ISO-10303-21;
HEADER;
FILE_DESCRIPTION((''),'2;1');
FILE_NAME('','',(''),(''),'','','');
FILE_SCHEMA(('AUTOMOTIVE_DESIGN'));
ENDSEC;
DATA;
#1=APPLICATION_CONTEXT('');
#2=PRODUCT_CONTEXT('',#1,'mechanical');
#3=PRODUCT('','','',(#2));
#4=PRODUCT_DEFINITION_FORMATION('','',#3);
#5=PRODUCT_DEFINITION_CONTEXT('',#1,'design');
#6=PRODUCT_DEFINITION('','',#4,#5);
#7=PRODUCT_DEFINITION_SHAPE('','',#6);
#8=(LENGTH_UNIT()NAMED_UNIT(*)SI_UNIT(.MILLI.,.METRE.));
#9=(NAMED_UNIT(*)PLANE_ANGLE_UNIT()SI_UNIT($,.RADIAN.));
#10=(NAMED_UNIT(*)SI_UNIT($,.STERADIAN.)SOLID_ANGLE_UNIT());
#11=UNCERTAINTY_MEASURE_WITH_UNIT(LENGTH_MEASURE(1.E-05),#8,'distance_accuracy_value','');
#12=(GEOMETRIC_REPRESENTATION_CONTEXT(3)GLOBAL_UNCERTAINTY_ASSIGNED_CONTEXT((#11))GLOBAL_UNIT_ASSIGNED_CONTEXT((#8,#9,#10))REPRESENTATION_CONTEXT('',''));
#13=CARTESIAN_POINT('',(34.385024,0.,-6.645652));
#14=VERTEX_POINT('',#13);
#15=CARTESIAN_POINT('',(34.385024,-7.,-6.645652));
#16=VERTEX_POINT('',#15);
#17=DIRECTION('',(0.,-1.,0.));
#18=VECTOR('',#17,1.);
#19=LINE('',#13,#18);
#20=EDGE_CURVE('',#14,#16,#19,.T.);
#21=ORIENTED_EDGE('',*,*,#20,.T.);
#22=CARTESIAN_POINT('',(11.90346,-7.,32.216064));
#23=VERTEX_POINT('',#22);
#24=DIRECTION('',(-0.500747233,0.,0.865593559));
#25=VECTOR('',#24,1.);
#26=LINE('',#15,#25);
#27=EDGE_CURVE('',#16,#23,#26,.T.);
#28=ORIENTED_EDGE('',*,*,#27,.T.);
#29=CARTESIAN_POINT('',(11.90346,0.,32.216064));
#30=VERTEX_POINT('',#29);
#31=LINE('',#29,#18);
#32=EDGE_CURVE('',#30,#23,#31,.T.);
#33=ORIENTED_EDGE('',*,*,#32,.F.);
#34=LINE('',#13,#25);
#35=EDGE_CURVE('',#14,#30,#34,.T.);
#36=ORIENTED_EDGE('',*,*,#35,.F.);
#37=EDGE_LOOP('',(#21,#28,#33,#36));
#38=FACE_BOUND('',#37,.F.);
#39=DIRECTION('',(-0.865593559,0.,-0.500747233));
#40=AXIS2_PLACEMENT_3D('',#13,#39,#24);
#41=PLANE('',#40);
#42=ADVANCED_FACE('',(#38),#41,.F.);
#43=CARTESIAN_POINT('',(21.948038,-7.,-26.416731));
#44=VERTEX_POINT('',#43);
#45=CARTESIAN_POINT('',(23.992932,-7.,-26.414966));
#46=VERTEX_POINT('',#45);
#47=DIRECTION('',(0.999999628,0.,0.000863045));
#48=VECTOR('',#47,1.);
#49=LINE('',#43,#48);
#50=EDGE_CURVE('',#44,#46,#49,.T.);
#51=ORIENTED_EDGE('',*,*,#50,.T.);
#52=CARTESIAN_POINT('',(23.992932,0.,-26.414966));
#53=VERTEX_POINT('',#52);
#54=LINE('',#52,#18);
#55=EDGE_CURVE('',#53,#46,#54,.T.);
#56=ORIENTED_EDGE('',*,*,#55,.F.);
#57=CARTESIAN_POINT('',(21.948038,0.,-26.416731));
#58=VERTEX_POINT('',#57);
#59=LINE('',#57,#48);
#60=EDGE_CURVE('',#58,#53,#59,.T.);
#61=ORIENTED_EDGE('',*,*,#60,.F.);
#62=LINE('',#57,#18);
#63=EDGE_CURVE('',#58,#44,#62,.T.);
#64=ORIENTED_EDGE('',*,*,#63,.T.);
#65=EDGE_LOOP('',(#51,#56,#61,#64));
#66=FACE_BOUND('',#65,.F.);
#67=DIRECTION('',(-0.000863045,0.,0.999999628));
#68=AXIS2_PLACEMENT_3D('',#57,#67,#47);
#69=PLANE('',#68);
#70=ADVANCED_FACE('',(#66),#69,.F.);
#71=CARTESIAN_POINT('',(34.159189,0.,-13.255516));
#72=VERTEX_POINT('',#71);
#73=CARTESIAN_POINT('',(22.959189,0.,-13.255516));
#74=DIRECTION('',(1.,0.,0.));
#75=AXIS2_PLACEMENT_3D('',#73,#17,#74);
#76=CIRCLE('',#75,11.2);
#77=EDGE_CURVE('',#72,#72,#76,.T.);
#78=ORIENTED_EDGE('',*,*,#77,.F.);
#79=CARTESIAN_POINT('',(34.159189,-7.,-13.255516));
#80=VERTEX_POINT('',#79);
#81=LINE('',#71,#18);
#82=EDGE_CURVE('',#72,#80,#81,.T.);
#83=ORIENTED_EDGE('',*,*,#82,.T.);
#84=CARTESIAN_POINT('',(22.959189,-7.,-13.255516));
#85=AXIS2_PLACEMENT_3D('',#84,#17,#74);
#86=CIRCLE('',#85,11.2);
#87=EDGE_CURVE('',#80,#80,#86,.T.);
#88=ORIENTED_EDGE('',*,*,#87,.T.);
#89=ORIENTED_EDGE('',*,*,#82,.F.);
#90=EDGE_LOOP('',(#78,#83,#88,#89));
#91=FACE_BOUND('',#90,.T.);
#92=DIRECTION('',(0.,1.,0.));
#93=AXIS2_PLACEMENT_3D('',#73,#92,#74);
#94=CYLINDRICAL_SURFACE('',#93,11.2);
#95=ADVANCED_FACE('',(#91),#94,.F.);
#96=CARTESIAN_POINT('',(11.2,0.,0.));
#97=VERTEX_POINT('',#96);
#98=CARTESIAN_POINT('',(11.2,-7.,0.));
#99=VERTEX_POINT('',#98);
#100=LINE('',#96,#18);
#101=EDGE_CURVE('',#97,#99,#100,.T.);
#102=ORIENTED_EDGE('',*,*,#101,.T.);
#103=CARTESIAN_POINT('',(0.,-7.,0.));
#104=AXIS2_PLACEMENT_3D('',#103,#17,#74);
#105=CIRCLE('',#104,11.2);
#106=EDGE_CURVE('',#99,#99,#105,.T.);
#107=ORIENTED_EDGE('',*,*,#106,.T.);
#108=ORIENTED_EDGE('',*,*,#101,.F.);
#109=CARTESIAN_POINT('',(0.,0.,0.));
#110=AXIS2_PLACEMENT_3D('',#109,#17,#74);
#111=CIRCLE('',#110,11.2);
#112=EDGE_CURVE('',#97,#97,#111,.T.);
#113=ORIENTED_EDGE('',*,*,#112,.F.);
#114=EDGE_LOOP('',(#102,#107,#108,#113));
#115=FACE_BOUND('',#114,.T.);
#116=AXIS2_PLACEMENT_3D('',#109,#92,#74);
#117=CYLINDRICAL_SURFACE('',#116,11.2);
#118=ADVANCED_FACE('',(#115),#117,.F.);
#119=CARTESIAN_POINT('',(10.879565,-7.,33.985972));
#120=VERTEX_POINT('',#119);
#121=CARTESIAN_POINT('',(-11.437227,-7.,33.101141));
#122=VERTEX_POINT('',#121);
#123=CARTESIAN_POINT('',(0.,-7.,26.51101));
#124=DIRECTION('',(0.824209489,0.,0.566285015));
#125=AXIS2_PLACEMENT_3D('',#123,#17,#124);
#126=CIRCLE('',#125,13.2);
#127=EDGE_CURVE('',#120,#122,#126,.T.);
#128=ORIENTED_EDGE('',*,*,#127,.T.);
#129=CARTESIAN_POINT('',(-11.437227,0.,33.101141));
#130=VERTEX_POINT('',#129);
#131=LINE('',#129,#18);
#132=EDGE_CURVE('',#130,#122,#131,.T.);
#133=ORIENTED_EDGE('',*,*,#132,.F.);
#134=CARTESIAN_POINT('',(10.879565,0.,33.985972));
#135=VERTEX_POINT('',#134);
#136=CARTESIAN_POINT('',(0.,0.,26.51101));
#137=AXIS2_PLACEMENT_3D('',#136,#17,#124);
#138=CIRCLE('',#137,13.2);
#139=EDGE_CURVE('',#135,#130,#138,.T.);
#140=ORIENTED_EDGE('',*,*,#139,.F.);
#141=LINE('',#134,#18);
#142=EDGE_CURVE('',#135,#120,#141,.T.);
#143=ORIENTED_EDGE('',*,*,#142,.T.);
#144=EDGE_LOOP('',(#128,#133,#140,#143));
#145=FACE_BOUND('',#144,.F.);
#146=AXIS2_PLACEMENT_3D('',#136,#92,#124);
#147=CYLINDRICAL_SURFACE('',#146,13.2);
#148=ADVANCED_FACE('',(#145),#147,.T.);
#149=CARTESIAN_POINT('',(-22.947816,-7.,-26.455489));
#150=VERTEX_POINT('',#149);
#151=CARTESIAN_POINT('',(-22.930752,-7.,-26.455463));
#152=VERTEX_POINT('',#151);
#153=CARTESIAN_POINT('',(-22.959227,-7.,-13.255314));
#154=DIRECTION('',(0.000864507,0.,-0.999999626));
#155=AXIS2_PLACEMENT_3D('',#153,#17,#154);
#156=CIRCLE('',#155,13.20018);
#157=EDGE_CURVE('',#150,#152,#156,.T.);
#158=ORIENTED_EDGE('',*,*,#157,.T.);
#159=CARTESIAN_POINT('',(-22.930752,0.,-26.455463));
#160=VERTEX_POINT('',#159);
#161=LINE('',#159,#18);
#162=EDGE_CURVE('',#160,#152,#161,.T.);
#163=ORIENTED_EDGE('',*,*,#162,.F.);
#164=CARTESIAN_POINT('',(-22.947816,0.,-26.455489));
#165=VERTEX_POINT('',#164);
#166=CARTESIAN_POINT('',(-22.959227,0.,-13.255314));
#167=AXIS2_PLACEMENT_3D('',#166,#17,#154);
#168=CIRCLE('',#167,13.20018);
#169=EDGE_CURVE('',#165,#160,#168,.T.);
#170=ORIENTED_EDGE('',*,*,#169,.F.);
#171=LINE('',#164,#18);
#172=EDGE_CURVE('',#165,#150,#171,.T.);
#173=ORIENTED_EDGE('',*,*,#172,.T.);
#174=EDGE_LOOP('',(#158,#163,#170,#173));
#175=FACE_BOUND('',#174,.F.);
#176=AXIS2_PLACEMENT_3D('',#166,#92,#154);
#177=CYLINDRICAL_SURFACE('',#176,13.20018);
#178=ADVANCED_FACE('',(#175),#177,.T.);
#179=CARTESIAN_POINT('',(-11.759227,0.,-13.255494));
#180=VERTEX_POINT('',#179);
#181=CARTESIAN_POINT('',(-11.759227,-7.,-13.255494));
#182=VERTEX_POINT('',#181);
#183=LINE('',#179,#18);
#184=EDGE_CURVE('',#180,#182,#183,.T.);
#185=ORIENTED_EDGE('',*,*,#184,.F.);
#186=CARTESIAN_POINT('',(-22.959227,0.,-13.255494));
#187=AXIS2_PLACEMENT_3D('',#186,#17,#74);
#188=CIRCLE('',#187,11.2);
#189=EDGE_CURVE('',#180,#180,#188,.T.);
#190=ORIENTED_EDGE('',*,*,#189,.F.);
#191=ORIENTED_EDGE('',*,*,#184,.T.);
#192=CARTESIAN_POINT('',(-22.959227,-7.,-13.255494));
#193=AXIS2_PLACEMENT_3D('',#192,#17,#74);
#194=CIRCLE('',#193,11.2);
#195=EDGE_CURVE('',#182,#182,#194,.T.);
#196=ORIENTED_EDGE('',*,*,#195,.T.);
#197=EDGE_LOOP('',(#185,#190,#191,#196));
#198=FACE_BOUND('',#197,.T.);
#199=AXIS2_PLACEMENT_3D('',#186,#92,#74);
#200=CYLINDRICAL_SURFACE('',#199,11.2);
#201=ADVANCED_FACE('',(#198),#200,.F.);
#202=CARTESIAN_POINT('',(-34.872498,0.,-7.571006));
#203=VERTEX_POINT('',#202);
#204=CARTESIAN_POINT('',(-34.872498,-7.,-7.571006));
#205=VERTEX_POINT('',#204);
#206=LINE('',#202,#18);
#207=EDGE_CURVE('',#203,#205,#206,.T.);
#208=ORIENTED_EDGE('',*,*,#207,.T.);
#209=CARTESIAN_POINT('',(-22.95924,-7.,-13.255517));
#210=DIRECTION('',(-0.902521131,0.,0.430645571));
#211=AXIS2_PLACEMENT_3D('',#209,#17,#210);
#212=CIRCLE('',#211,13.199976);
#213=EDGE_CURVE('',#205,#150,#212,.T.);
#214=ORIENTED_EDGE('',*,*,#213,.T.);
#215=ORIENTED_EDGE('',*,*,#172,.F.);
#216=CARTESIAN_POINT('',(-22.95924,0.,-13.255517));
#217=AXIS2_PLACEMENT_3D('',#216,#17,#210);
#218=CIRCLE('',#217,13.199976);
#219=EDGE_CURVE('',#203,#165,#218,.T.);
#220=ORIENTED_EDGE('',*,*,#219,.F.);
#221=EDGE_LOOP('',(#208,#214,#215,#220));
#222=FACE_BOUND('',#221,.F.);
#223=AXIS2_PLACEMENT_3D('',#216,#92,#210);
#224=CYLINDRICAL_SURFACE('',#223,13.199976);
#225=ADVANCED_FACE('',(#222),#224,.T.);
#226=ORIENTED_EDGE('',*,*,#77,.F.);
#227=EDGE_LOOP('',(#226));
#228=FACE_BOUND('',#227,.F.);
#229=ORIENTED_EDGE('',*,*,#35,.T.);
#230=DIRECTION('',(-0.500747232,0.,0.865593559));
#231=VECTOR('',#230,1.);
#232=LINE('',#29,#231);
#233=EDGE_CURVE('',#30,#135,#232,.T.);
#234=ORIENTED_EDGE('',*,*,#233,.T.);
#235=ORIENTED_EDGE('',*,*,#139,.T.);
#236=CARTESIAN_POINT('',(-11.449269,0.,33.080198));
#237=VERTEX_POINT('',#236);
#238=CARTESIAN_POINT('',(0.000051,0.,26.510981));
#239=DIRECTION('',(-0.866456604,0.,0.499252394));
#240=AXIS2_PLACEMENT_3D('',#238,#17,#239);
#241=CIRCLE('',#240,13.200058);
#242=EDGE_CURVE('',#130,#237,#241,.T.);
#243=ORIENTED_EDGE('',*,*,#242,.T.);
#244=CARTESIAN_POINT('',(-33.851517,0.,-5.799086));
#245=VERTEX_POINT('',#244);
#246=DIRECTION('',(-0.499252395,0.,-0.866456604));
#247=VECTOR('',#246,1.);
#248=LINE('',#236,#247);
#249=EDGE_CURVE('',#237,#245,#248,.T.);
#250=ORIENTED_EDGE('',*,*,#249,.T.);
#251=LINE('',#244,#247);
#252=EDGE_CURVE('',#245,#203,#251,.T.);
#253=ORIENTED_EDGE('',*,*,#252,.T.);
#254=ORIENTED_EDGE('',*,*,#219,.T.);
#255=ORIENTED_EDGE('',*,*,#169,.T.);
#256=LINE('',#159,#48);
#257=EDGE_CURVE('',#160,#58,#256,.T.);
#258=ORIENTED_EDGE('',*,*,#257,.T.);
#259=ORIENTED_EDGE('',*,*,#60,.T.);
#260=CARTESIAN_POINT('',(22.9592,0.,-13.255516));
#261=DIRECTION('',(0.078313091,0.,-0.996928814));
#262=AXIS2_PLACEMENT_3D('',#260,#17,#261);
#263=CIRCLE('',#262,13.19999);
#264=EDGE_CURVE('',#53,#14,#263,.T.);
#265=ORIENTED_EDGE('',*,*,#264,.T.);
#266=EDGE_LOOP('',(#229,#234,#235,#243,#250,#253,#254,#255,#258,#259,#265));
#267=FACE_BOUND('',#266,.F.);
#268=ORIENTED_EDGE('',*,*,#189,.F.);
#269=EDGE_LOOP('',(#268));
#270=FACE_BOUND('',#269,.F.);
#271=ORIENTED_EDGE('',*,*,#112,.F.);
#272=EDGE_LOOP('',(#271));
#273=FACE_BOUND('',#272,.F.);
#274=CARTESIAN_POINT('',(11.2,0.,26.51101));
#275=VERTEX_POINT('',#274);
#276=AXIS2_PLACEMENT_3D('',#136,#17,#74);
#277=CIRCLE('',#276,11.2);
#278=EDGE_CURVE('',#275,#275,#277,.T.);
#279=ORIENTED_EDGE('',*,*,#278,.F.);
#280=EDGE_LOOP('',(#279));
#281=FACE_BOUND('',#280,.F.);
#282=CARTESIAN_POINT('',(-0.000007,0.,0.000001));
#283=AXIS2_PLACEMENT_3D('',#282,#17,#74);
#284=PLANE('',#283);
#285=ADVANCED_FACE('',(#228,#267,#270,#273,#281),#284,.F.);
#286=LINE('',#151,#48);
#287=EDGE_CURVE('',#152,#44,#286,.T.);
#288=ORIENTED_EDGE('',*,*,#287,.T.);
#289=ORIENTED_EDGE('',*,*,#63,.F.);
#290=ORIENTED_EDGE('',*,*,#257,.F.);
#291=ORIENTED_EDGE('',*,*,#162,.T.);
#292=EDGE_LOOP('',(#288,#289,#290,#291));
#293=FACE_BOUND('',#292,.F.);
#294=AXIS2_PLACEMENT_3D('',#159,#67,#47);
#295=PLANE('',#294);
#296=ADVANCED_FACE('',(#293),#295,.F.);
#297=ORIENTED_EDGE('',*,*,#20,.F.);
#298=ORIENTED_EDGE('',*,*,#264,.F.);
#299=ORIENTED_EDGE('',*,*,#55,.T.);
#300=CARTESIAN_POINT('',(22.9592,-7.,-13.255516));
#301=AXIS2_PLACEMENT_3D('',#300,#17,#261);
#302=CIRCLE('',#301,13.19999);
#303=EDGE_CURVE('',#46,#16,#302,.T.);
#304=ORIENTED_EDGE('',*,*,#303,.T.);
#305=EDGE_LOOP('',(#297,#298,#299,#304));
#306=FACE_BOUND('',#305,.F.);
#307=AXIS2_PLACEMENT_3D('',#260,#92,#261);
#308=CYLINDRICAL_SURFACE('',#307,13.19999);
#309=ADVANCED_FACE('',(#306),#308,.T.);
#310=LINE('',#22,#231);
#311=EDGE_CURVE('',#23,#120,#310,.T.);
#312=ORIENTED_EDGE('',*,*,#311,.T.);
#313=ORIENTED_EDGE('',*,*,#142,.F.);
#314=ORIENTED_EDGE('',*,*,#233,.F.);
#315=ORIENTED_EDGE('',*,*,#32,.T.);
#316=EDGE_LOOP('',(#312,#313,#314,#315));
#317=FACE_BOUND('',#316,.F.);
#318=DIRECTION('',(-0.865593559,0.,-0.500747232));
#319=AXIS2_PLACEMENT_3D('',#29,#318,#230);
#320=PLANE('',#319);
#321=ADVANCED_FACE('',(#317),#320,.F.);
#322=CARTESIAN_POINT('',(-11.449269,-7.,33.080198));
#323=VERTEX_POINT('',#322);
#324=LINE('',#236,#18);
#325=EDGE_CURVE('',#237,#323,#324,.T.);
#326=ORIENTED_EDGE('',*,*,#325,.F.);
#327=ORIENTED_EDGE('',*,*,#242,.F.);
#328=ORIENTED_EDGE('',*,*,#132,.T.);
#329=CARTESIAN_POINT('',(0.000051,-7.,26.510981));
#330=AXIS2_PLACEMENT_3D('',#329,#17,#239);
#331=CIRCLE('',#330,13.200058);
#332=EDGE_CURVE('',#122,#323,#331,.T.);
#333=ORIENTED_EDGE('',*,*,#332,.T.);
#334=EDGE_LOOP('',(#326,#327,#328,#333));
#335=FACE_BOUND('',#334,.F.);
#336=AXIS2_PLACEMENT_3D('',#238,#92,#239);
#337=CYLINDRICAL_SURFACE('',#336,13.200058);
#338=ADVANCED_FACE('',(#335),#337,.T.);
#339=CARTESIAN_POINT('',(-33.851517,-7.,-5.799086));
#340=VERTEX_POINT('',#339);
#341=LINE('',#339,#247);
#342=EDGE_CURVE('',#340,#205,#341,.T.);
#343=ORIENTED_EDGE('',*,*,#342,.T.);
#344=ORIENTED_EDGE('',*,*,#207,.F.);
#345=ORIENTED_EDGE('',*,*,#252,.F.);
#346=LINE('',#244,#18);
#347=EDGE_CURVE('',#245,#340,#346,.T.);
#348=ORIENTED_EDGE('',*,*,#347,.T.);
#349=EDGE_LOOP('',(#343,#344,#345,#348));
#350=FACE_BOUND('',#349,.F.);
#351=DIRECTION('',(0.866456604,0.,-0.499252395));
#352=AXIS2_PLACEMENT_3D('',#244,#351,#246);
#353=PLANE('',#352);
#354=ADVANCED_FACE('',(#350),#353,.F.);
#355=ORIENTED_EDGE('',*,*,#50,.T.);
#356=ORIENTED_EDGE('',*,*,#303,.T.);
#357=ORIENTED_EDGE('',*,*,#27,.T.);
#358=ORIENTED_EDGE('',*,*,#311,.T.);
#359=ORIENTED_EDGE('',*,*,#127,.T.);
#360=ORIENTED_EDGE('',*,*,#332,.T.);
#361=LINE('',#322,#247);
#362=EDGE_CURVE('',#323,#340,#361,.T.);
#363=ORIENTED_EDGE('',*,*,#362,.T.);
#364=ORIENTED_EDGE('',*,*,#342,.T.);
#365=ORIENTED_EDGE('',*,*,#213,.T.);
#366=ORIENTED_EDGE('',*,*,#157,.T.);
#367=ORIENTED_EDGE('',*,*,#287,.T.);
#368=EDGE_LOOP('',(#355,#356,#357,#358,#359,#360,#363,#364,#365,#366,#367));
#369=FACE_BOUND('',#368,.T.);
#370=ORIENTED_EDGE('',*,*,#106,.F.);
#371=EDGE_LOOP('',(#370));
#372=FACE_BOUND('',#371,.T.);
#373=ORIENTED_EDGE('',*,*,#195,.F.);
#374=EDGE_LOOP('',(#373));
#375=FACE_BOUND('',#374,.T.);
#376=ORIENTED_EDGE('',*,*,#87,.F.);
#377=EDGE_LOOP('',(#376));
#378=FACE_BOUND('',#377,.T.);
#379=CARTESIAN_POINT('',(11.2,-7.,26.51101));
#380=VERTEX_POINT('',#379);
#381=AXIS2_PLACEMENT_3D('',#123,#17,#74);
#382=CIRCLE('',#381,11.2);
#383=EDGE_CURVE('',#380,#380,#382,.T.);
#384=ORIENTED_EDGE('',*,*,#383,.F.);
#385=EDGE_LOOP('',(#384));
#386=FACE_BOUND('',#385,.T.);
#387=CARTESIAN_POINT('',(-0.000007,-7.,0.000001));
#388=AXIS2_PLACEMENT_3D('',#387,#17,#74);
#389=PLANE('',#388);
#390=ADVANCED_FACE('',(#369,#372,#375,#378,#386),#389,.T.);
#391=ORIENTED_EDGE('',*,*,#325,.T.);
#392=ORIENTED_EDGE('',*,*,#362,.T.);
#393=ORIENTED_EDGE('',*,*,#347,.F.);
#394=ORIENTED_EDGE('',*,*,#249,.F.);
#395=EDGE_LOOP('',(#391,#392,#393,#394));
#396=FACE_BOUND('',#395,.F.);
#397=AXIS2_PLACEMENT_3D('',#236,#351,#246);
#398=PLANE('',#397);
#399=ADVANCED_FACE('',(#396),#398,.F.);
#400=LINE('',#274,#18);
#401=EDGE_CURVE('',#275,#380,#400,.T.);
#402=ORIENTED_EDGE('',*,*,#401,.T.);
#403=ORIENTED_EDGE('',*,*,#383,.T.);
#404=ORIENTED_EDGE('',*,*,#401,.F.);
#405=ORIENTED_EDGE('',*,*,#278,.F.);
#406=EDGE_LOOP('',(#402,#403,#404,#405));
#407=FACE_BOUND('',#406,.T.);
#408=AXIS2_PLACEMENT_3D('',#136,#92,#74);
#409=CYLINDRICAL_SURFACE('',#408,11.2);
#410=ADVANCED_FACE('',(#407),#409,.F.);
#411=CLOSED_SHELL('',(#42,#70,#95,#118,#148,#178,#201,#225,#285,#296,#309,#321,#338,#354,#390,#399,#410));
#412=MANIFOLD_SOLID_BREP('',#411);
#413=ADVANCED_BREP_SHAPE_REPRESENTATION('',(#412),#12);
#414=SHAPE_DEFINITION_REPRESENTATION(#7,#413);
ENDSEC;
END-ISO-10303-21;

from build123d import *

# Parameters (mm, degrees)
F0_R     = 11.2
F1_DEPTH = 7


# Not quite as in the source:
# - ends of sketch curves that miss each other by under 0.0002 mm in the source are joined


with BuildPart() as f1:
    # F0 (on Front) → F1 (new body)
    with BuildSketch(Plane.XZ):
        with BuildLine():
            Line((34.3850237921, -6.6456524925), (11.9034600857, 32.216063506))
            Line((11.9034600857, 32.216063506), (10.8795652547, 33.9859719811))
            ThreePointArc((10.8795652547, 33.9859719811), (-0.5229512338, 39.7006466997), (-11.4372271683, 33.1011413973))
            ThreePointArc((-11.4372271683, 33.1011413973), (-11.443253047, 33.0906723652), (-11.449269343, 33.0801978231))
            Line((-11.449269343, 33.0801978231), (-33.8515173907, -5.7990863826))
            Line((-33.8515173907, -5.7990863826), (-34.8724977352, -7.5710060978))
            ThreePointArc((-34.8724977352, -7.5710060978), (-34.1203065589, -20.3032101841), (-22.9478157697, -26.4554889214))
            ThreePointArc((-22.9478157697, -26.4554889214), (-22.9392839252, -26.4554787883), (-22.930752089, -26.4554631407))
            Line((-22.930752089, -26.4554631407), (21.9480379364, -26.4167307195))
            Line((21.9480379364, -26.4167307195), (23.9929324806, -26.4149658832))
            ThreePointArc((23.9929324806, -26.4149658832), (34.6432297092, -19.3974365399), (34.3850237921, -6.6456524925))
        make_face()
        with Locations((-22.9592271072, -13.2554938539)):
            Circle(F0_R, mode=Mode.SUBTRACT)
        with Locations((22.9591888153, -13.2555159617)):
            Circle(F0_R, mode=Mode.SUBTRACT)
        Circle(F0_R, mode=Mode.SUBTRACT)
        with Locations((0, 26.5110097826)):
            Circle(F0_R, mode=Mode.SUBTRACT)
    extrude(amount=F1_DEPTH)


solid = f1.part
